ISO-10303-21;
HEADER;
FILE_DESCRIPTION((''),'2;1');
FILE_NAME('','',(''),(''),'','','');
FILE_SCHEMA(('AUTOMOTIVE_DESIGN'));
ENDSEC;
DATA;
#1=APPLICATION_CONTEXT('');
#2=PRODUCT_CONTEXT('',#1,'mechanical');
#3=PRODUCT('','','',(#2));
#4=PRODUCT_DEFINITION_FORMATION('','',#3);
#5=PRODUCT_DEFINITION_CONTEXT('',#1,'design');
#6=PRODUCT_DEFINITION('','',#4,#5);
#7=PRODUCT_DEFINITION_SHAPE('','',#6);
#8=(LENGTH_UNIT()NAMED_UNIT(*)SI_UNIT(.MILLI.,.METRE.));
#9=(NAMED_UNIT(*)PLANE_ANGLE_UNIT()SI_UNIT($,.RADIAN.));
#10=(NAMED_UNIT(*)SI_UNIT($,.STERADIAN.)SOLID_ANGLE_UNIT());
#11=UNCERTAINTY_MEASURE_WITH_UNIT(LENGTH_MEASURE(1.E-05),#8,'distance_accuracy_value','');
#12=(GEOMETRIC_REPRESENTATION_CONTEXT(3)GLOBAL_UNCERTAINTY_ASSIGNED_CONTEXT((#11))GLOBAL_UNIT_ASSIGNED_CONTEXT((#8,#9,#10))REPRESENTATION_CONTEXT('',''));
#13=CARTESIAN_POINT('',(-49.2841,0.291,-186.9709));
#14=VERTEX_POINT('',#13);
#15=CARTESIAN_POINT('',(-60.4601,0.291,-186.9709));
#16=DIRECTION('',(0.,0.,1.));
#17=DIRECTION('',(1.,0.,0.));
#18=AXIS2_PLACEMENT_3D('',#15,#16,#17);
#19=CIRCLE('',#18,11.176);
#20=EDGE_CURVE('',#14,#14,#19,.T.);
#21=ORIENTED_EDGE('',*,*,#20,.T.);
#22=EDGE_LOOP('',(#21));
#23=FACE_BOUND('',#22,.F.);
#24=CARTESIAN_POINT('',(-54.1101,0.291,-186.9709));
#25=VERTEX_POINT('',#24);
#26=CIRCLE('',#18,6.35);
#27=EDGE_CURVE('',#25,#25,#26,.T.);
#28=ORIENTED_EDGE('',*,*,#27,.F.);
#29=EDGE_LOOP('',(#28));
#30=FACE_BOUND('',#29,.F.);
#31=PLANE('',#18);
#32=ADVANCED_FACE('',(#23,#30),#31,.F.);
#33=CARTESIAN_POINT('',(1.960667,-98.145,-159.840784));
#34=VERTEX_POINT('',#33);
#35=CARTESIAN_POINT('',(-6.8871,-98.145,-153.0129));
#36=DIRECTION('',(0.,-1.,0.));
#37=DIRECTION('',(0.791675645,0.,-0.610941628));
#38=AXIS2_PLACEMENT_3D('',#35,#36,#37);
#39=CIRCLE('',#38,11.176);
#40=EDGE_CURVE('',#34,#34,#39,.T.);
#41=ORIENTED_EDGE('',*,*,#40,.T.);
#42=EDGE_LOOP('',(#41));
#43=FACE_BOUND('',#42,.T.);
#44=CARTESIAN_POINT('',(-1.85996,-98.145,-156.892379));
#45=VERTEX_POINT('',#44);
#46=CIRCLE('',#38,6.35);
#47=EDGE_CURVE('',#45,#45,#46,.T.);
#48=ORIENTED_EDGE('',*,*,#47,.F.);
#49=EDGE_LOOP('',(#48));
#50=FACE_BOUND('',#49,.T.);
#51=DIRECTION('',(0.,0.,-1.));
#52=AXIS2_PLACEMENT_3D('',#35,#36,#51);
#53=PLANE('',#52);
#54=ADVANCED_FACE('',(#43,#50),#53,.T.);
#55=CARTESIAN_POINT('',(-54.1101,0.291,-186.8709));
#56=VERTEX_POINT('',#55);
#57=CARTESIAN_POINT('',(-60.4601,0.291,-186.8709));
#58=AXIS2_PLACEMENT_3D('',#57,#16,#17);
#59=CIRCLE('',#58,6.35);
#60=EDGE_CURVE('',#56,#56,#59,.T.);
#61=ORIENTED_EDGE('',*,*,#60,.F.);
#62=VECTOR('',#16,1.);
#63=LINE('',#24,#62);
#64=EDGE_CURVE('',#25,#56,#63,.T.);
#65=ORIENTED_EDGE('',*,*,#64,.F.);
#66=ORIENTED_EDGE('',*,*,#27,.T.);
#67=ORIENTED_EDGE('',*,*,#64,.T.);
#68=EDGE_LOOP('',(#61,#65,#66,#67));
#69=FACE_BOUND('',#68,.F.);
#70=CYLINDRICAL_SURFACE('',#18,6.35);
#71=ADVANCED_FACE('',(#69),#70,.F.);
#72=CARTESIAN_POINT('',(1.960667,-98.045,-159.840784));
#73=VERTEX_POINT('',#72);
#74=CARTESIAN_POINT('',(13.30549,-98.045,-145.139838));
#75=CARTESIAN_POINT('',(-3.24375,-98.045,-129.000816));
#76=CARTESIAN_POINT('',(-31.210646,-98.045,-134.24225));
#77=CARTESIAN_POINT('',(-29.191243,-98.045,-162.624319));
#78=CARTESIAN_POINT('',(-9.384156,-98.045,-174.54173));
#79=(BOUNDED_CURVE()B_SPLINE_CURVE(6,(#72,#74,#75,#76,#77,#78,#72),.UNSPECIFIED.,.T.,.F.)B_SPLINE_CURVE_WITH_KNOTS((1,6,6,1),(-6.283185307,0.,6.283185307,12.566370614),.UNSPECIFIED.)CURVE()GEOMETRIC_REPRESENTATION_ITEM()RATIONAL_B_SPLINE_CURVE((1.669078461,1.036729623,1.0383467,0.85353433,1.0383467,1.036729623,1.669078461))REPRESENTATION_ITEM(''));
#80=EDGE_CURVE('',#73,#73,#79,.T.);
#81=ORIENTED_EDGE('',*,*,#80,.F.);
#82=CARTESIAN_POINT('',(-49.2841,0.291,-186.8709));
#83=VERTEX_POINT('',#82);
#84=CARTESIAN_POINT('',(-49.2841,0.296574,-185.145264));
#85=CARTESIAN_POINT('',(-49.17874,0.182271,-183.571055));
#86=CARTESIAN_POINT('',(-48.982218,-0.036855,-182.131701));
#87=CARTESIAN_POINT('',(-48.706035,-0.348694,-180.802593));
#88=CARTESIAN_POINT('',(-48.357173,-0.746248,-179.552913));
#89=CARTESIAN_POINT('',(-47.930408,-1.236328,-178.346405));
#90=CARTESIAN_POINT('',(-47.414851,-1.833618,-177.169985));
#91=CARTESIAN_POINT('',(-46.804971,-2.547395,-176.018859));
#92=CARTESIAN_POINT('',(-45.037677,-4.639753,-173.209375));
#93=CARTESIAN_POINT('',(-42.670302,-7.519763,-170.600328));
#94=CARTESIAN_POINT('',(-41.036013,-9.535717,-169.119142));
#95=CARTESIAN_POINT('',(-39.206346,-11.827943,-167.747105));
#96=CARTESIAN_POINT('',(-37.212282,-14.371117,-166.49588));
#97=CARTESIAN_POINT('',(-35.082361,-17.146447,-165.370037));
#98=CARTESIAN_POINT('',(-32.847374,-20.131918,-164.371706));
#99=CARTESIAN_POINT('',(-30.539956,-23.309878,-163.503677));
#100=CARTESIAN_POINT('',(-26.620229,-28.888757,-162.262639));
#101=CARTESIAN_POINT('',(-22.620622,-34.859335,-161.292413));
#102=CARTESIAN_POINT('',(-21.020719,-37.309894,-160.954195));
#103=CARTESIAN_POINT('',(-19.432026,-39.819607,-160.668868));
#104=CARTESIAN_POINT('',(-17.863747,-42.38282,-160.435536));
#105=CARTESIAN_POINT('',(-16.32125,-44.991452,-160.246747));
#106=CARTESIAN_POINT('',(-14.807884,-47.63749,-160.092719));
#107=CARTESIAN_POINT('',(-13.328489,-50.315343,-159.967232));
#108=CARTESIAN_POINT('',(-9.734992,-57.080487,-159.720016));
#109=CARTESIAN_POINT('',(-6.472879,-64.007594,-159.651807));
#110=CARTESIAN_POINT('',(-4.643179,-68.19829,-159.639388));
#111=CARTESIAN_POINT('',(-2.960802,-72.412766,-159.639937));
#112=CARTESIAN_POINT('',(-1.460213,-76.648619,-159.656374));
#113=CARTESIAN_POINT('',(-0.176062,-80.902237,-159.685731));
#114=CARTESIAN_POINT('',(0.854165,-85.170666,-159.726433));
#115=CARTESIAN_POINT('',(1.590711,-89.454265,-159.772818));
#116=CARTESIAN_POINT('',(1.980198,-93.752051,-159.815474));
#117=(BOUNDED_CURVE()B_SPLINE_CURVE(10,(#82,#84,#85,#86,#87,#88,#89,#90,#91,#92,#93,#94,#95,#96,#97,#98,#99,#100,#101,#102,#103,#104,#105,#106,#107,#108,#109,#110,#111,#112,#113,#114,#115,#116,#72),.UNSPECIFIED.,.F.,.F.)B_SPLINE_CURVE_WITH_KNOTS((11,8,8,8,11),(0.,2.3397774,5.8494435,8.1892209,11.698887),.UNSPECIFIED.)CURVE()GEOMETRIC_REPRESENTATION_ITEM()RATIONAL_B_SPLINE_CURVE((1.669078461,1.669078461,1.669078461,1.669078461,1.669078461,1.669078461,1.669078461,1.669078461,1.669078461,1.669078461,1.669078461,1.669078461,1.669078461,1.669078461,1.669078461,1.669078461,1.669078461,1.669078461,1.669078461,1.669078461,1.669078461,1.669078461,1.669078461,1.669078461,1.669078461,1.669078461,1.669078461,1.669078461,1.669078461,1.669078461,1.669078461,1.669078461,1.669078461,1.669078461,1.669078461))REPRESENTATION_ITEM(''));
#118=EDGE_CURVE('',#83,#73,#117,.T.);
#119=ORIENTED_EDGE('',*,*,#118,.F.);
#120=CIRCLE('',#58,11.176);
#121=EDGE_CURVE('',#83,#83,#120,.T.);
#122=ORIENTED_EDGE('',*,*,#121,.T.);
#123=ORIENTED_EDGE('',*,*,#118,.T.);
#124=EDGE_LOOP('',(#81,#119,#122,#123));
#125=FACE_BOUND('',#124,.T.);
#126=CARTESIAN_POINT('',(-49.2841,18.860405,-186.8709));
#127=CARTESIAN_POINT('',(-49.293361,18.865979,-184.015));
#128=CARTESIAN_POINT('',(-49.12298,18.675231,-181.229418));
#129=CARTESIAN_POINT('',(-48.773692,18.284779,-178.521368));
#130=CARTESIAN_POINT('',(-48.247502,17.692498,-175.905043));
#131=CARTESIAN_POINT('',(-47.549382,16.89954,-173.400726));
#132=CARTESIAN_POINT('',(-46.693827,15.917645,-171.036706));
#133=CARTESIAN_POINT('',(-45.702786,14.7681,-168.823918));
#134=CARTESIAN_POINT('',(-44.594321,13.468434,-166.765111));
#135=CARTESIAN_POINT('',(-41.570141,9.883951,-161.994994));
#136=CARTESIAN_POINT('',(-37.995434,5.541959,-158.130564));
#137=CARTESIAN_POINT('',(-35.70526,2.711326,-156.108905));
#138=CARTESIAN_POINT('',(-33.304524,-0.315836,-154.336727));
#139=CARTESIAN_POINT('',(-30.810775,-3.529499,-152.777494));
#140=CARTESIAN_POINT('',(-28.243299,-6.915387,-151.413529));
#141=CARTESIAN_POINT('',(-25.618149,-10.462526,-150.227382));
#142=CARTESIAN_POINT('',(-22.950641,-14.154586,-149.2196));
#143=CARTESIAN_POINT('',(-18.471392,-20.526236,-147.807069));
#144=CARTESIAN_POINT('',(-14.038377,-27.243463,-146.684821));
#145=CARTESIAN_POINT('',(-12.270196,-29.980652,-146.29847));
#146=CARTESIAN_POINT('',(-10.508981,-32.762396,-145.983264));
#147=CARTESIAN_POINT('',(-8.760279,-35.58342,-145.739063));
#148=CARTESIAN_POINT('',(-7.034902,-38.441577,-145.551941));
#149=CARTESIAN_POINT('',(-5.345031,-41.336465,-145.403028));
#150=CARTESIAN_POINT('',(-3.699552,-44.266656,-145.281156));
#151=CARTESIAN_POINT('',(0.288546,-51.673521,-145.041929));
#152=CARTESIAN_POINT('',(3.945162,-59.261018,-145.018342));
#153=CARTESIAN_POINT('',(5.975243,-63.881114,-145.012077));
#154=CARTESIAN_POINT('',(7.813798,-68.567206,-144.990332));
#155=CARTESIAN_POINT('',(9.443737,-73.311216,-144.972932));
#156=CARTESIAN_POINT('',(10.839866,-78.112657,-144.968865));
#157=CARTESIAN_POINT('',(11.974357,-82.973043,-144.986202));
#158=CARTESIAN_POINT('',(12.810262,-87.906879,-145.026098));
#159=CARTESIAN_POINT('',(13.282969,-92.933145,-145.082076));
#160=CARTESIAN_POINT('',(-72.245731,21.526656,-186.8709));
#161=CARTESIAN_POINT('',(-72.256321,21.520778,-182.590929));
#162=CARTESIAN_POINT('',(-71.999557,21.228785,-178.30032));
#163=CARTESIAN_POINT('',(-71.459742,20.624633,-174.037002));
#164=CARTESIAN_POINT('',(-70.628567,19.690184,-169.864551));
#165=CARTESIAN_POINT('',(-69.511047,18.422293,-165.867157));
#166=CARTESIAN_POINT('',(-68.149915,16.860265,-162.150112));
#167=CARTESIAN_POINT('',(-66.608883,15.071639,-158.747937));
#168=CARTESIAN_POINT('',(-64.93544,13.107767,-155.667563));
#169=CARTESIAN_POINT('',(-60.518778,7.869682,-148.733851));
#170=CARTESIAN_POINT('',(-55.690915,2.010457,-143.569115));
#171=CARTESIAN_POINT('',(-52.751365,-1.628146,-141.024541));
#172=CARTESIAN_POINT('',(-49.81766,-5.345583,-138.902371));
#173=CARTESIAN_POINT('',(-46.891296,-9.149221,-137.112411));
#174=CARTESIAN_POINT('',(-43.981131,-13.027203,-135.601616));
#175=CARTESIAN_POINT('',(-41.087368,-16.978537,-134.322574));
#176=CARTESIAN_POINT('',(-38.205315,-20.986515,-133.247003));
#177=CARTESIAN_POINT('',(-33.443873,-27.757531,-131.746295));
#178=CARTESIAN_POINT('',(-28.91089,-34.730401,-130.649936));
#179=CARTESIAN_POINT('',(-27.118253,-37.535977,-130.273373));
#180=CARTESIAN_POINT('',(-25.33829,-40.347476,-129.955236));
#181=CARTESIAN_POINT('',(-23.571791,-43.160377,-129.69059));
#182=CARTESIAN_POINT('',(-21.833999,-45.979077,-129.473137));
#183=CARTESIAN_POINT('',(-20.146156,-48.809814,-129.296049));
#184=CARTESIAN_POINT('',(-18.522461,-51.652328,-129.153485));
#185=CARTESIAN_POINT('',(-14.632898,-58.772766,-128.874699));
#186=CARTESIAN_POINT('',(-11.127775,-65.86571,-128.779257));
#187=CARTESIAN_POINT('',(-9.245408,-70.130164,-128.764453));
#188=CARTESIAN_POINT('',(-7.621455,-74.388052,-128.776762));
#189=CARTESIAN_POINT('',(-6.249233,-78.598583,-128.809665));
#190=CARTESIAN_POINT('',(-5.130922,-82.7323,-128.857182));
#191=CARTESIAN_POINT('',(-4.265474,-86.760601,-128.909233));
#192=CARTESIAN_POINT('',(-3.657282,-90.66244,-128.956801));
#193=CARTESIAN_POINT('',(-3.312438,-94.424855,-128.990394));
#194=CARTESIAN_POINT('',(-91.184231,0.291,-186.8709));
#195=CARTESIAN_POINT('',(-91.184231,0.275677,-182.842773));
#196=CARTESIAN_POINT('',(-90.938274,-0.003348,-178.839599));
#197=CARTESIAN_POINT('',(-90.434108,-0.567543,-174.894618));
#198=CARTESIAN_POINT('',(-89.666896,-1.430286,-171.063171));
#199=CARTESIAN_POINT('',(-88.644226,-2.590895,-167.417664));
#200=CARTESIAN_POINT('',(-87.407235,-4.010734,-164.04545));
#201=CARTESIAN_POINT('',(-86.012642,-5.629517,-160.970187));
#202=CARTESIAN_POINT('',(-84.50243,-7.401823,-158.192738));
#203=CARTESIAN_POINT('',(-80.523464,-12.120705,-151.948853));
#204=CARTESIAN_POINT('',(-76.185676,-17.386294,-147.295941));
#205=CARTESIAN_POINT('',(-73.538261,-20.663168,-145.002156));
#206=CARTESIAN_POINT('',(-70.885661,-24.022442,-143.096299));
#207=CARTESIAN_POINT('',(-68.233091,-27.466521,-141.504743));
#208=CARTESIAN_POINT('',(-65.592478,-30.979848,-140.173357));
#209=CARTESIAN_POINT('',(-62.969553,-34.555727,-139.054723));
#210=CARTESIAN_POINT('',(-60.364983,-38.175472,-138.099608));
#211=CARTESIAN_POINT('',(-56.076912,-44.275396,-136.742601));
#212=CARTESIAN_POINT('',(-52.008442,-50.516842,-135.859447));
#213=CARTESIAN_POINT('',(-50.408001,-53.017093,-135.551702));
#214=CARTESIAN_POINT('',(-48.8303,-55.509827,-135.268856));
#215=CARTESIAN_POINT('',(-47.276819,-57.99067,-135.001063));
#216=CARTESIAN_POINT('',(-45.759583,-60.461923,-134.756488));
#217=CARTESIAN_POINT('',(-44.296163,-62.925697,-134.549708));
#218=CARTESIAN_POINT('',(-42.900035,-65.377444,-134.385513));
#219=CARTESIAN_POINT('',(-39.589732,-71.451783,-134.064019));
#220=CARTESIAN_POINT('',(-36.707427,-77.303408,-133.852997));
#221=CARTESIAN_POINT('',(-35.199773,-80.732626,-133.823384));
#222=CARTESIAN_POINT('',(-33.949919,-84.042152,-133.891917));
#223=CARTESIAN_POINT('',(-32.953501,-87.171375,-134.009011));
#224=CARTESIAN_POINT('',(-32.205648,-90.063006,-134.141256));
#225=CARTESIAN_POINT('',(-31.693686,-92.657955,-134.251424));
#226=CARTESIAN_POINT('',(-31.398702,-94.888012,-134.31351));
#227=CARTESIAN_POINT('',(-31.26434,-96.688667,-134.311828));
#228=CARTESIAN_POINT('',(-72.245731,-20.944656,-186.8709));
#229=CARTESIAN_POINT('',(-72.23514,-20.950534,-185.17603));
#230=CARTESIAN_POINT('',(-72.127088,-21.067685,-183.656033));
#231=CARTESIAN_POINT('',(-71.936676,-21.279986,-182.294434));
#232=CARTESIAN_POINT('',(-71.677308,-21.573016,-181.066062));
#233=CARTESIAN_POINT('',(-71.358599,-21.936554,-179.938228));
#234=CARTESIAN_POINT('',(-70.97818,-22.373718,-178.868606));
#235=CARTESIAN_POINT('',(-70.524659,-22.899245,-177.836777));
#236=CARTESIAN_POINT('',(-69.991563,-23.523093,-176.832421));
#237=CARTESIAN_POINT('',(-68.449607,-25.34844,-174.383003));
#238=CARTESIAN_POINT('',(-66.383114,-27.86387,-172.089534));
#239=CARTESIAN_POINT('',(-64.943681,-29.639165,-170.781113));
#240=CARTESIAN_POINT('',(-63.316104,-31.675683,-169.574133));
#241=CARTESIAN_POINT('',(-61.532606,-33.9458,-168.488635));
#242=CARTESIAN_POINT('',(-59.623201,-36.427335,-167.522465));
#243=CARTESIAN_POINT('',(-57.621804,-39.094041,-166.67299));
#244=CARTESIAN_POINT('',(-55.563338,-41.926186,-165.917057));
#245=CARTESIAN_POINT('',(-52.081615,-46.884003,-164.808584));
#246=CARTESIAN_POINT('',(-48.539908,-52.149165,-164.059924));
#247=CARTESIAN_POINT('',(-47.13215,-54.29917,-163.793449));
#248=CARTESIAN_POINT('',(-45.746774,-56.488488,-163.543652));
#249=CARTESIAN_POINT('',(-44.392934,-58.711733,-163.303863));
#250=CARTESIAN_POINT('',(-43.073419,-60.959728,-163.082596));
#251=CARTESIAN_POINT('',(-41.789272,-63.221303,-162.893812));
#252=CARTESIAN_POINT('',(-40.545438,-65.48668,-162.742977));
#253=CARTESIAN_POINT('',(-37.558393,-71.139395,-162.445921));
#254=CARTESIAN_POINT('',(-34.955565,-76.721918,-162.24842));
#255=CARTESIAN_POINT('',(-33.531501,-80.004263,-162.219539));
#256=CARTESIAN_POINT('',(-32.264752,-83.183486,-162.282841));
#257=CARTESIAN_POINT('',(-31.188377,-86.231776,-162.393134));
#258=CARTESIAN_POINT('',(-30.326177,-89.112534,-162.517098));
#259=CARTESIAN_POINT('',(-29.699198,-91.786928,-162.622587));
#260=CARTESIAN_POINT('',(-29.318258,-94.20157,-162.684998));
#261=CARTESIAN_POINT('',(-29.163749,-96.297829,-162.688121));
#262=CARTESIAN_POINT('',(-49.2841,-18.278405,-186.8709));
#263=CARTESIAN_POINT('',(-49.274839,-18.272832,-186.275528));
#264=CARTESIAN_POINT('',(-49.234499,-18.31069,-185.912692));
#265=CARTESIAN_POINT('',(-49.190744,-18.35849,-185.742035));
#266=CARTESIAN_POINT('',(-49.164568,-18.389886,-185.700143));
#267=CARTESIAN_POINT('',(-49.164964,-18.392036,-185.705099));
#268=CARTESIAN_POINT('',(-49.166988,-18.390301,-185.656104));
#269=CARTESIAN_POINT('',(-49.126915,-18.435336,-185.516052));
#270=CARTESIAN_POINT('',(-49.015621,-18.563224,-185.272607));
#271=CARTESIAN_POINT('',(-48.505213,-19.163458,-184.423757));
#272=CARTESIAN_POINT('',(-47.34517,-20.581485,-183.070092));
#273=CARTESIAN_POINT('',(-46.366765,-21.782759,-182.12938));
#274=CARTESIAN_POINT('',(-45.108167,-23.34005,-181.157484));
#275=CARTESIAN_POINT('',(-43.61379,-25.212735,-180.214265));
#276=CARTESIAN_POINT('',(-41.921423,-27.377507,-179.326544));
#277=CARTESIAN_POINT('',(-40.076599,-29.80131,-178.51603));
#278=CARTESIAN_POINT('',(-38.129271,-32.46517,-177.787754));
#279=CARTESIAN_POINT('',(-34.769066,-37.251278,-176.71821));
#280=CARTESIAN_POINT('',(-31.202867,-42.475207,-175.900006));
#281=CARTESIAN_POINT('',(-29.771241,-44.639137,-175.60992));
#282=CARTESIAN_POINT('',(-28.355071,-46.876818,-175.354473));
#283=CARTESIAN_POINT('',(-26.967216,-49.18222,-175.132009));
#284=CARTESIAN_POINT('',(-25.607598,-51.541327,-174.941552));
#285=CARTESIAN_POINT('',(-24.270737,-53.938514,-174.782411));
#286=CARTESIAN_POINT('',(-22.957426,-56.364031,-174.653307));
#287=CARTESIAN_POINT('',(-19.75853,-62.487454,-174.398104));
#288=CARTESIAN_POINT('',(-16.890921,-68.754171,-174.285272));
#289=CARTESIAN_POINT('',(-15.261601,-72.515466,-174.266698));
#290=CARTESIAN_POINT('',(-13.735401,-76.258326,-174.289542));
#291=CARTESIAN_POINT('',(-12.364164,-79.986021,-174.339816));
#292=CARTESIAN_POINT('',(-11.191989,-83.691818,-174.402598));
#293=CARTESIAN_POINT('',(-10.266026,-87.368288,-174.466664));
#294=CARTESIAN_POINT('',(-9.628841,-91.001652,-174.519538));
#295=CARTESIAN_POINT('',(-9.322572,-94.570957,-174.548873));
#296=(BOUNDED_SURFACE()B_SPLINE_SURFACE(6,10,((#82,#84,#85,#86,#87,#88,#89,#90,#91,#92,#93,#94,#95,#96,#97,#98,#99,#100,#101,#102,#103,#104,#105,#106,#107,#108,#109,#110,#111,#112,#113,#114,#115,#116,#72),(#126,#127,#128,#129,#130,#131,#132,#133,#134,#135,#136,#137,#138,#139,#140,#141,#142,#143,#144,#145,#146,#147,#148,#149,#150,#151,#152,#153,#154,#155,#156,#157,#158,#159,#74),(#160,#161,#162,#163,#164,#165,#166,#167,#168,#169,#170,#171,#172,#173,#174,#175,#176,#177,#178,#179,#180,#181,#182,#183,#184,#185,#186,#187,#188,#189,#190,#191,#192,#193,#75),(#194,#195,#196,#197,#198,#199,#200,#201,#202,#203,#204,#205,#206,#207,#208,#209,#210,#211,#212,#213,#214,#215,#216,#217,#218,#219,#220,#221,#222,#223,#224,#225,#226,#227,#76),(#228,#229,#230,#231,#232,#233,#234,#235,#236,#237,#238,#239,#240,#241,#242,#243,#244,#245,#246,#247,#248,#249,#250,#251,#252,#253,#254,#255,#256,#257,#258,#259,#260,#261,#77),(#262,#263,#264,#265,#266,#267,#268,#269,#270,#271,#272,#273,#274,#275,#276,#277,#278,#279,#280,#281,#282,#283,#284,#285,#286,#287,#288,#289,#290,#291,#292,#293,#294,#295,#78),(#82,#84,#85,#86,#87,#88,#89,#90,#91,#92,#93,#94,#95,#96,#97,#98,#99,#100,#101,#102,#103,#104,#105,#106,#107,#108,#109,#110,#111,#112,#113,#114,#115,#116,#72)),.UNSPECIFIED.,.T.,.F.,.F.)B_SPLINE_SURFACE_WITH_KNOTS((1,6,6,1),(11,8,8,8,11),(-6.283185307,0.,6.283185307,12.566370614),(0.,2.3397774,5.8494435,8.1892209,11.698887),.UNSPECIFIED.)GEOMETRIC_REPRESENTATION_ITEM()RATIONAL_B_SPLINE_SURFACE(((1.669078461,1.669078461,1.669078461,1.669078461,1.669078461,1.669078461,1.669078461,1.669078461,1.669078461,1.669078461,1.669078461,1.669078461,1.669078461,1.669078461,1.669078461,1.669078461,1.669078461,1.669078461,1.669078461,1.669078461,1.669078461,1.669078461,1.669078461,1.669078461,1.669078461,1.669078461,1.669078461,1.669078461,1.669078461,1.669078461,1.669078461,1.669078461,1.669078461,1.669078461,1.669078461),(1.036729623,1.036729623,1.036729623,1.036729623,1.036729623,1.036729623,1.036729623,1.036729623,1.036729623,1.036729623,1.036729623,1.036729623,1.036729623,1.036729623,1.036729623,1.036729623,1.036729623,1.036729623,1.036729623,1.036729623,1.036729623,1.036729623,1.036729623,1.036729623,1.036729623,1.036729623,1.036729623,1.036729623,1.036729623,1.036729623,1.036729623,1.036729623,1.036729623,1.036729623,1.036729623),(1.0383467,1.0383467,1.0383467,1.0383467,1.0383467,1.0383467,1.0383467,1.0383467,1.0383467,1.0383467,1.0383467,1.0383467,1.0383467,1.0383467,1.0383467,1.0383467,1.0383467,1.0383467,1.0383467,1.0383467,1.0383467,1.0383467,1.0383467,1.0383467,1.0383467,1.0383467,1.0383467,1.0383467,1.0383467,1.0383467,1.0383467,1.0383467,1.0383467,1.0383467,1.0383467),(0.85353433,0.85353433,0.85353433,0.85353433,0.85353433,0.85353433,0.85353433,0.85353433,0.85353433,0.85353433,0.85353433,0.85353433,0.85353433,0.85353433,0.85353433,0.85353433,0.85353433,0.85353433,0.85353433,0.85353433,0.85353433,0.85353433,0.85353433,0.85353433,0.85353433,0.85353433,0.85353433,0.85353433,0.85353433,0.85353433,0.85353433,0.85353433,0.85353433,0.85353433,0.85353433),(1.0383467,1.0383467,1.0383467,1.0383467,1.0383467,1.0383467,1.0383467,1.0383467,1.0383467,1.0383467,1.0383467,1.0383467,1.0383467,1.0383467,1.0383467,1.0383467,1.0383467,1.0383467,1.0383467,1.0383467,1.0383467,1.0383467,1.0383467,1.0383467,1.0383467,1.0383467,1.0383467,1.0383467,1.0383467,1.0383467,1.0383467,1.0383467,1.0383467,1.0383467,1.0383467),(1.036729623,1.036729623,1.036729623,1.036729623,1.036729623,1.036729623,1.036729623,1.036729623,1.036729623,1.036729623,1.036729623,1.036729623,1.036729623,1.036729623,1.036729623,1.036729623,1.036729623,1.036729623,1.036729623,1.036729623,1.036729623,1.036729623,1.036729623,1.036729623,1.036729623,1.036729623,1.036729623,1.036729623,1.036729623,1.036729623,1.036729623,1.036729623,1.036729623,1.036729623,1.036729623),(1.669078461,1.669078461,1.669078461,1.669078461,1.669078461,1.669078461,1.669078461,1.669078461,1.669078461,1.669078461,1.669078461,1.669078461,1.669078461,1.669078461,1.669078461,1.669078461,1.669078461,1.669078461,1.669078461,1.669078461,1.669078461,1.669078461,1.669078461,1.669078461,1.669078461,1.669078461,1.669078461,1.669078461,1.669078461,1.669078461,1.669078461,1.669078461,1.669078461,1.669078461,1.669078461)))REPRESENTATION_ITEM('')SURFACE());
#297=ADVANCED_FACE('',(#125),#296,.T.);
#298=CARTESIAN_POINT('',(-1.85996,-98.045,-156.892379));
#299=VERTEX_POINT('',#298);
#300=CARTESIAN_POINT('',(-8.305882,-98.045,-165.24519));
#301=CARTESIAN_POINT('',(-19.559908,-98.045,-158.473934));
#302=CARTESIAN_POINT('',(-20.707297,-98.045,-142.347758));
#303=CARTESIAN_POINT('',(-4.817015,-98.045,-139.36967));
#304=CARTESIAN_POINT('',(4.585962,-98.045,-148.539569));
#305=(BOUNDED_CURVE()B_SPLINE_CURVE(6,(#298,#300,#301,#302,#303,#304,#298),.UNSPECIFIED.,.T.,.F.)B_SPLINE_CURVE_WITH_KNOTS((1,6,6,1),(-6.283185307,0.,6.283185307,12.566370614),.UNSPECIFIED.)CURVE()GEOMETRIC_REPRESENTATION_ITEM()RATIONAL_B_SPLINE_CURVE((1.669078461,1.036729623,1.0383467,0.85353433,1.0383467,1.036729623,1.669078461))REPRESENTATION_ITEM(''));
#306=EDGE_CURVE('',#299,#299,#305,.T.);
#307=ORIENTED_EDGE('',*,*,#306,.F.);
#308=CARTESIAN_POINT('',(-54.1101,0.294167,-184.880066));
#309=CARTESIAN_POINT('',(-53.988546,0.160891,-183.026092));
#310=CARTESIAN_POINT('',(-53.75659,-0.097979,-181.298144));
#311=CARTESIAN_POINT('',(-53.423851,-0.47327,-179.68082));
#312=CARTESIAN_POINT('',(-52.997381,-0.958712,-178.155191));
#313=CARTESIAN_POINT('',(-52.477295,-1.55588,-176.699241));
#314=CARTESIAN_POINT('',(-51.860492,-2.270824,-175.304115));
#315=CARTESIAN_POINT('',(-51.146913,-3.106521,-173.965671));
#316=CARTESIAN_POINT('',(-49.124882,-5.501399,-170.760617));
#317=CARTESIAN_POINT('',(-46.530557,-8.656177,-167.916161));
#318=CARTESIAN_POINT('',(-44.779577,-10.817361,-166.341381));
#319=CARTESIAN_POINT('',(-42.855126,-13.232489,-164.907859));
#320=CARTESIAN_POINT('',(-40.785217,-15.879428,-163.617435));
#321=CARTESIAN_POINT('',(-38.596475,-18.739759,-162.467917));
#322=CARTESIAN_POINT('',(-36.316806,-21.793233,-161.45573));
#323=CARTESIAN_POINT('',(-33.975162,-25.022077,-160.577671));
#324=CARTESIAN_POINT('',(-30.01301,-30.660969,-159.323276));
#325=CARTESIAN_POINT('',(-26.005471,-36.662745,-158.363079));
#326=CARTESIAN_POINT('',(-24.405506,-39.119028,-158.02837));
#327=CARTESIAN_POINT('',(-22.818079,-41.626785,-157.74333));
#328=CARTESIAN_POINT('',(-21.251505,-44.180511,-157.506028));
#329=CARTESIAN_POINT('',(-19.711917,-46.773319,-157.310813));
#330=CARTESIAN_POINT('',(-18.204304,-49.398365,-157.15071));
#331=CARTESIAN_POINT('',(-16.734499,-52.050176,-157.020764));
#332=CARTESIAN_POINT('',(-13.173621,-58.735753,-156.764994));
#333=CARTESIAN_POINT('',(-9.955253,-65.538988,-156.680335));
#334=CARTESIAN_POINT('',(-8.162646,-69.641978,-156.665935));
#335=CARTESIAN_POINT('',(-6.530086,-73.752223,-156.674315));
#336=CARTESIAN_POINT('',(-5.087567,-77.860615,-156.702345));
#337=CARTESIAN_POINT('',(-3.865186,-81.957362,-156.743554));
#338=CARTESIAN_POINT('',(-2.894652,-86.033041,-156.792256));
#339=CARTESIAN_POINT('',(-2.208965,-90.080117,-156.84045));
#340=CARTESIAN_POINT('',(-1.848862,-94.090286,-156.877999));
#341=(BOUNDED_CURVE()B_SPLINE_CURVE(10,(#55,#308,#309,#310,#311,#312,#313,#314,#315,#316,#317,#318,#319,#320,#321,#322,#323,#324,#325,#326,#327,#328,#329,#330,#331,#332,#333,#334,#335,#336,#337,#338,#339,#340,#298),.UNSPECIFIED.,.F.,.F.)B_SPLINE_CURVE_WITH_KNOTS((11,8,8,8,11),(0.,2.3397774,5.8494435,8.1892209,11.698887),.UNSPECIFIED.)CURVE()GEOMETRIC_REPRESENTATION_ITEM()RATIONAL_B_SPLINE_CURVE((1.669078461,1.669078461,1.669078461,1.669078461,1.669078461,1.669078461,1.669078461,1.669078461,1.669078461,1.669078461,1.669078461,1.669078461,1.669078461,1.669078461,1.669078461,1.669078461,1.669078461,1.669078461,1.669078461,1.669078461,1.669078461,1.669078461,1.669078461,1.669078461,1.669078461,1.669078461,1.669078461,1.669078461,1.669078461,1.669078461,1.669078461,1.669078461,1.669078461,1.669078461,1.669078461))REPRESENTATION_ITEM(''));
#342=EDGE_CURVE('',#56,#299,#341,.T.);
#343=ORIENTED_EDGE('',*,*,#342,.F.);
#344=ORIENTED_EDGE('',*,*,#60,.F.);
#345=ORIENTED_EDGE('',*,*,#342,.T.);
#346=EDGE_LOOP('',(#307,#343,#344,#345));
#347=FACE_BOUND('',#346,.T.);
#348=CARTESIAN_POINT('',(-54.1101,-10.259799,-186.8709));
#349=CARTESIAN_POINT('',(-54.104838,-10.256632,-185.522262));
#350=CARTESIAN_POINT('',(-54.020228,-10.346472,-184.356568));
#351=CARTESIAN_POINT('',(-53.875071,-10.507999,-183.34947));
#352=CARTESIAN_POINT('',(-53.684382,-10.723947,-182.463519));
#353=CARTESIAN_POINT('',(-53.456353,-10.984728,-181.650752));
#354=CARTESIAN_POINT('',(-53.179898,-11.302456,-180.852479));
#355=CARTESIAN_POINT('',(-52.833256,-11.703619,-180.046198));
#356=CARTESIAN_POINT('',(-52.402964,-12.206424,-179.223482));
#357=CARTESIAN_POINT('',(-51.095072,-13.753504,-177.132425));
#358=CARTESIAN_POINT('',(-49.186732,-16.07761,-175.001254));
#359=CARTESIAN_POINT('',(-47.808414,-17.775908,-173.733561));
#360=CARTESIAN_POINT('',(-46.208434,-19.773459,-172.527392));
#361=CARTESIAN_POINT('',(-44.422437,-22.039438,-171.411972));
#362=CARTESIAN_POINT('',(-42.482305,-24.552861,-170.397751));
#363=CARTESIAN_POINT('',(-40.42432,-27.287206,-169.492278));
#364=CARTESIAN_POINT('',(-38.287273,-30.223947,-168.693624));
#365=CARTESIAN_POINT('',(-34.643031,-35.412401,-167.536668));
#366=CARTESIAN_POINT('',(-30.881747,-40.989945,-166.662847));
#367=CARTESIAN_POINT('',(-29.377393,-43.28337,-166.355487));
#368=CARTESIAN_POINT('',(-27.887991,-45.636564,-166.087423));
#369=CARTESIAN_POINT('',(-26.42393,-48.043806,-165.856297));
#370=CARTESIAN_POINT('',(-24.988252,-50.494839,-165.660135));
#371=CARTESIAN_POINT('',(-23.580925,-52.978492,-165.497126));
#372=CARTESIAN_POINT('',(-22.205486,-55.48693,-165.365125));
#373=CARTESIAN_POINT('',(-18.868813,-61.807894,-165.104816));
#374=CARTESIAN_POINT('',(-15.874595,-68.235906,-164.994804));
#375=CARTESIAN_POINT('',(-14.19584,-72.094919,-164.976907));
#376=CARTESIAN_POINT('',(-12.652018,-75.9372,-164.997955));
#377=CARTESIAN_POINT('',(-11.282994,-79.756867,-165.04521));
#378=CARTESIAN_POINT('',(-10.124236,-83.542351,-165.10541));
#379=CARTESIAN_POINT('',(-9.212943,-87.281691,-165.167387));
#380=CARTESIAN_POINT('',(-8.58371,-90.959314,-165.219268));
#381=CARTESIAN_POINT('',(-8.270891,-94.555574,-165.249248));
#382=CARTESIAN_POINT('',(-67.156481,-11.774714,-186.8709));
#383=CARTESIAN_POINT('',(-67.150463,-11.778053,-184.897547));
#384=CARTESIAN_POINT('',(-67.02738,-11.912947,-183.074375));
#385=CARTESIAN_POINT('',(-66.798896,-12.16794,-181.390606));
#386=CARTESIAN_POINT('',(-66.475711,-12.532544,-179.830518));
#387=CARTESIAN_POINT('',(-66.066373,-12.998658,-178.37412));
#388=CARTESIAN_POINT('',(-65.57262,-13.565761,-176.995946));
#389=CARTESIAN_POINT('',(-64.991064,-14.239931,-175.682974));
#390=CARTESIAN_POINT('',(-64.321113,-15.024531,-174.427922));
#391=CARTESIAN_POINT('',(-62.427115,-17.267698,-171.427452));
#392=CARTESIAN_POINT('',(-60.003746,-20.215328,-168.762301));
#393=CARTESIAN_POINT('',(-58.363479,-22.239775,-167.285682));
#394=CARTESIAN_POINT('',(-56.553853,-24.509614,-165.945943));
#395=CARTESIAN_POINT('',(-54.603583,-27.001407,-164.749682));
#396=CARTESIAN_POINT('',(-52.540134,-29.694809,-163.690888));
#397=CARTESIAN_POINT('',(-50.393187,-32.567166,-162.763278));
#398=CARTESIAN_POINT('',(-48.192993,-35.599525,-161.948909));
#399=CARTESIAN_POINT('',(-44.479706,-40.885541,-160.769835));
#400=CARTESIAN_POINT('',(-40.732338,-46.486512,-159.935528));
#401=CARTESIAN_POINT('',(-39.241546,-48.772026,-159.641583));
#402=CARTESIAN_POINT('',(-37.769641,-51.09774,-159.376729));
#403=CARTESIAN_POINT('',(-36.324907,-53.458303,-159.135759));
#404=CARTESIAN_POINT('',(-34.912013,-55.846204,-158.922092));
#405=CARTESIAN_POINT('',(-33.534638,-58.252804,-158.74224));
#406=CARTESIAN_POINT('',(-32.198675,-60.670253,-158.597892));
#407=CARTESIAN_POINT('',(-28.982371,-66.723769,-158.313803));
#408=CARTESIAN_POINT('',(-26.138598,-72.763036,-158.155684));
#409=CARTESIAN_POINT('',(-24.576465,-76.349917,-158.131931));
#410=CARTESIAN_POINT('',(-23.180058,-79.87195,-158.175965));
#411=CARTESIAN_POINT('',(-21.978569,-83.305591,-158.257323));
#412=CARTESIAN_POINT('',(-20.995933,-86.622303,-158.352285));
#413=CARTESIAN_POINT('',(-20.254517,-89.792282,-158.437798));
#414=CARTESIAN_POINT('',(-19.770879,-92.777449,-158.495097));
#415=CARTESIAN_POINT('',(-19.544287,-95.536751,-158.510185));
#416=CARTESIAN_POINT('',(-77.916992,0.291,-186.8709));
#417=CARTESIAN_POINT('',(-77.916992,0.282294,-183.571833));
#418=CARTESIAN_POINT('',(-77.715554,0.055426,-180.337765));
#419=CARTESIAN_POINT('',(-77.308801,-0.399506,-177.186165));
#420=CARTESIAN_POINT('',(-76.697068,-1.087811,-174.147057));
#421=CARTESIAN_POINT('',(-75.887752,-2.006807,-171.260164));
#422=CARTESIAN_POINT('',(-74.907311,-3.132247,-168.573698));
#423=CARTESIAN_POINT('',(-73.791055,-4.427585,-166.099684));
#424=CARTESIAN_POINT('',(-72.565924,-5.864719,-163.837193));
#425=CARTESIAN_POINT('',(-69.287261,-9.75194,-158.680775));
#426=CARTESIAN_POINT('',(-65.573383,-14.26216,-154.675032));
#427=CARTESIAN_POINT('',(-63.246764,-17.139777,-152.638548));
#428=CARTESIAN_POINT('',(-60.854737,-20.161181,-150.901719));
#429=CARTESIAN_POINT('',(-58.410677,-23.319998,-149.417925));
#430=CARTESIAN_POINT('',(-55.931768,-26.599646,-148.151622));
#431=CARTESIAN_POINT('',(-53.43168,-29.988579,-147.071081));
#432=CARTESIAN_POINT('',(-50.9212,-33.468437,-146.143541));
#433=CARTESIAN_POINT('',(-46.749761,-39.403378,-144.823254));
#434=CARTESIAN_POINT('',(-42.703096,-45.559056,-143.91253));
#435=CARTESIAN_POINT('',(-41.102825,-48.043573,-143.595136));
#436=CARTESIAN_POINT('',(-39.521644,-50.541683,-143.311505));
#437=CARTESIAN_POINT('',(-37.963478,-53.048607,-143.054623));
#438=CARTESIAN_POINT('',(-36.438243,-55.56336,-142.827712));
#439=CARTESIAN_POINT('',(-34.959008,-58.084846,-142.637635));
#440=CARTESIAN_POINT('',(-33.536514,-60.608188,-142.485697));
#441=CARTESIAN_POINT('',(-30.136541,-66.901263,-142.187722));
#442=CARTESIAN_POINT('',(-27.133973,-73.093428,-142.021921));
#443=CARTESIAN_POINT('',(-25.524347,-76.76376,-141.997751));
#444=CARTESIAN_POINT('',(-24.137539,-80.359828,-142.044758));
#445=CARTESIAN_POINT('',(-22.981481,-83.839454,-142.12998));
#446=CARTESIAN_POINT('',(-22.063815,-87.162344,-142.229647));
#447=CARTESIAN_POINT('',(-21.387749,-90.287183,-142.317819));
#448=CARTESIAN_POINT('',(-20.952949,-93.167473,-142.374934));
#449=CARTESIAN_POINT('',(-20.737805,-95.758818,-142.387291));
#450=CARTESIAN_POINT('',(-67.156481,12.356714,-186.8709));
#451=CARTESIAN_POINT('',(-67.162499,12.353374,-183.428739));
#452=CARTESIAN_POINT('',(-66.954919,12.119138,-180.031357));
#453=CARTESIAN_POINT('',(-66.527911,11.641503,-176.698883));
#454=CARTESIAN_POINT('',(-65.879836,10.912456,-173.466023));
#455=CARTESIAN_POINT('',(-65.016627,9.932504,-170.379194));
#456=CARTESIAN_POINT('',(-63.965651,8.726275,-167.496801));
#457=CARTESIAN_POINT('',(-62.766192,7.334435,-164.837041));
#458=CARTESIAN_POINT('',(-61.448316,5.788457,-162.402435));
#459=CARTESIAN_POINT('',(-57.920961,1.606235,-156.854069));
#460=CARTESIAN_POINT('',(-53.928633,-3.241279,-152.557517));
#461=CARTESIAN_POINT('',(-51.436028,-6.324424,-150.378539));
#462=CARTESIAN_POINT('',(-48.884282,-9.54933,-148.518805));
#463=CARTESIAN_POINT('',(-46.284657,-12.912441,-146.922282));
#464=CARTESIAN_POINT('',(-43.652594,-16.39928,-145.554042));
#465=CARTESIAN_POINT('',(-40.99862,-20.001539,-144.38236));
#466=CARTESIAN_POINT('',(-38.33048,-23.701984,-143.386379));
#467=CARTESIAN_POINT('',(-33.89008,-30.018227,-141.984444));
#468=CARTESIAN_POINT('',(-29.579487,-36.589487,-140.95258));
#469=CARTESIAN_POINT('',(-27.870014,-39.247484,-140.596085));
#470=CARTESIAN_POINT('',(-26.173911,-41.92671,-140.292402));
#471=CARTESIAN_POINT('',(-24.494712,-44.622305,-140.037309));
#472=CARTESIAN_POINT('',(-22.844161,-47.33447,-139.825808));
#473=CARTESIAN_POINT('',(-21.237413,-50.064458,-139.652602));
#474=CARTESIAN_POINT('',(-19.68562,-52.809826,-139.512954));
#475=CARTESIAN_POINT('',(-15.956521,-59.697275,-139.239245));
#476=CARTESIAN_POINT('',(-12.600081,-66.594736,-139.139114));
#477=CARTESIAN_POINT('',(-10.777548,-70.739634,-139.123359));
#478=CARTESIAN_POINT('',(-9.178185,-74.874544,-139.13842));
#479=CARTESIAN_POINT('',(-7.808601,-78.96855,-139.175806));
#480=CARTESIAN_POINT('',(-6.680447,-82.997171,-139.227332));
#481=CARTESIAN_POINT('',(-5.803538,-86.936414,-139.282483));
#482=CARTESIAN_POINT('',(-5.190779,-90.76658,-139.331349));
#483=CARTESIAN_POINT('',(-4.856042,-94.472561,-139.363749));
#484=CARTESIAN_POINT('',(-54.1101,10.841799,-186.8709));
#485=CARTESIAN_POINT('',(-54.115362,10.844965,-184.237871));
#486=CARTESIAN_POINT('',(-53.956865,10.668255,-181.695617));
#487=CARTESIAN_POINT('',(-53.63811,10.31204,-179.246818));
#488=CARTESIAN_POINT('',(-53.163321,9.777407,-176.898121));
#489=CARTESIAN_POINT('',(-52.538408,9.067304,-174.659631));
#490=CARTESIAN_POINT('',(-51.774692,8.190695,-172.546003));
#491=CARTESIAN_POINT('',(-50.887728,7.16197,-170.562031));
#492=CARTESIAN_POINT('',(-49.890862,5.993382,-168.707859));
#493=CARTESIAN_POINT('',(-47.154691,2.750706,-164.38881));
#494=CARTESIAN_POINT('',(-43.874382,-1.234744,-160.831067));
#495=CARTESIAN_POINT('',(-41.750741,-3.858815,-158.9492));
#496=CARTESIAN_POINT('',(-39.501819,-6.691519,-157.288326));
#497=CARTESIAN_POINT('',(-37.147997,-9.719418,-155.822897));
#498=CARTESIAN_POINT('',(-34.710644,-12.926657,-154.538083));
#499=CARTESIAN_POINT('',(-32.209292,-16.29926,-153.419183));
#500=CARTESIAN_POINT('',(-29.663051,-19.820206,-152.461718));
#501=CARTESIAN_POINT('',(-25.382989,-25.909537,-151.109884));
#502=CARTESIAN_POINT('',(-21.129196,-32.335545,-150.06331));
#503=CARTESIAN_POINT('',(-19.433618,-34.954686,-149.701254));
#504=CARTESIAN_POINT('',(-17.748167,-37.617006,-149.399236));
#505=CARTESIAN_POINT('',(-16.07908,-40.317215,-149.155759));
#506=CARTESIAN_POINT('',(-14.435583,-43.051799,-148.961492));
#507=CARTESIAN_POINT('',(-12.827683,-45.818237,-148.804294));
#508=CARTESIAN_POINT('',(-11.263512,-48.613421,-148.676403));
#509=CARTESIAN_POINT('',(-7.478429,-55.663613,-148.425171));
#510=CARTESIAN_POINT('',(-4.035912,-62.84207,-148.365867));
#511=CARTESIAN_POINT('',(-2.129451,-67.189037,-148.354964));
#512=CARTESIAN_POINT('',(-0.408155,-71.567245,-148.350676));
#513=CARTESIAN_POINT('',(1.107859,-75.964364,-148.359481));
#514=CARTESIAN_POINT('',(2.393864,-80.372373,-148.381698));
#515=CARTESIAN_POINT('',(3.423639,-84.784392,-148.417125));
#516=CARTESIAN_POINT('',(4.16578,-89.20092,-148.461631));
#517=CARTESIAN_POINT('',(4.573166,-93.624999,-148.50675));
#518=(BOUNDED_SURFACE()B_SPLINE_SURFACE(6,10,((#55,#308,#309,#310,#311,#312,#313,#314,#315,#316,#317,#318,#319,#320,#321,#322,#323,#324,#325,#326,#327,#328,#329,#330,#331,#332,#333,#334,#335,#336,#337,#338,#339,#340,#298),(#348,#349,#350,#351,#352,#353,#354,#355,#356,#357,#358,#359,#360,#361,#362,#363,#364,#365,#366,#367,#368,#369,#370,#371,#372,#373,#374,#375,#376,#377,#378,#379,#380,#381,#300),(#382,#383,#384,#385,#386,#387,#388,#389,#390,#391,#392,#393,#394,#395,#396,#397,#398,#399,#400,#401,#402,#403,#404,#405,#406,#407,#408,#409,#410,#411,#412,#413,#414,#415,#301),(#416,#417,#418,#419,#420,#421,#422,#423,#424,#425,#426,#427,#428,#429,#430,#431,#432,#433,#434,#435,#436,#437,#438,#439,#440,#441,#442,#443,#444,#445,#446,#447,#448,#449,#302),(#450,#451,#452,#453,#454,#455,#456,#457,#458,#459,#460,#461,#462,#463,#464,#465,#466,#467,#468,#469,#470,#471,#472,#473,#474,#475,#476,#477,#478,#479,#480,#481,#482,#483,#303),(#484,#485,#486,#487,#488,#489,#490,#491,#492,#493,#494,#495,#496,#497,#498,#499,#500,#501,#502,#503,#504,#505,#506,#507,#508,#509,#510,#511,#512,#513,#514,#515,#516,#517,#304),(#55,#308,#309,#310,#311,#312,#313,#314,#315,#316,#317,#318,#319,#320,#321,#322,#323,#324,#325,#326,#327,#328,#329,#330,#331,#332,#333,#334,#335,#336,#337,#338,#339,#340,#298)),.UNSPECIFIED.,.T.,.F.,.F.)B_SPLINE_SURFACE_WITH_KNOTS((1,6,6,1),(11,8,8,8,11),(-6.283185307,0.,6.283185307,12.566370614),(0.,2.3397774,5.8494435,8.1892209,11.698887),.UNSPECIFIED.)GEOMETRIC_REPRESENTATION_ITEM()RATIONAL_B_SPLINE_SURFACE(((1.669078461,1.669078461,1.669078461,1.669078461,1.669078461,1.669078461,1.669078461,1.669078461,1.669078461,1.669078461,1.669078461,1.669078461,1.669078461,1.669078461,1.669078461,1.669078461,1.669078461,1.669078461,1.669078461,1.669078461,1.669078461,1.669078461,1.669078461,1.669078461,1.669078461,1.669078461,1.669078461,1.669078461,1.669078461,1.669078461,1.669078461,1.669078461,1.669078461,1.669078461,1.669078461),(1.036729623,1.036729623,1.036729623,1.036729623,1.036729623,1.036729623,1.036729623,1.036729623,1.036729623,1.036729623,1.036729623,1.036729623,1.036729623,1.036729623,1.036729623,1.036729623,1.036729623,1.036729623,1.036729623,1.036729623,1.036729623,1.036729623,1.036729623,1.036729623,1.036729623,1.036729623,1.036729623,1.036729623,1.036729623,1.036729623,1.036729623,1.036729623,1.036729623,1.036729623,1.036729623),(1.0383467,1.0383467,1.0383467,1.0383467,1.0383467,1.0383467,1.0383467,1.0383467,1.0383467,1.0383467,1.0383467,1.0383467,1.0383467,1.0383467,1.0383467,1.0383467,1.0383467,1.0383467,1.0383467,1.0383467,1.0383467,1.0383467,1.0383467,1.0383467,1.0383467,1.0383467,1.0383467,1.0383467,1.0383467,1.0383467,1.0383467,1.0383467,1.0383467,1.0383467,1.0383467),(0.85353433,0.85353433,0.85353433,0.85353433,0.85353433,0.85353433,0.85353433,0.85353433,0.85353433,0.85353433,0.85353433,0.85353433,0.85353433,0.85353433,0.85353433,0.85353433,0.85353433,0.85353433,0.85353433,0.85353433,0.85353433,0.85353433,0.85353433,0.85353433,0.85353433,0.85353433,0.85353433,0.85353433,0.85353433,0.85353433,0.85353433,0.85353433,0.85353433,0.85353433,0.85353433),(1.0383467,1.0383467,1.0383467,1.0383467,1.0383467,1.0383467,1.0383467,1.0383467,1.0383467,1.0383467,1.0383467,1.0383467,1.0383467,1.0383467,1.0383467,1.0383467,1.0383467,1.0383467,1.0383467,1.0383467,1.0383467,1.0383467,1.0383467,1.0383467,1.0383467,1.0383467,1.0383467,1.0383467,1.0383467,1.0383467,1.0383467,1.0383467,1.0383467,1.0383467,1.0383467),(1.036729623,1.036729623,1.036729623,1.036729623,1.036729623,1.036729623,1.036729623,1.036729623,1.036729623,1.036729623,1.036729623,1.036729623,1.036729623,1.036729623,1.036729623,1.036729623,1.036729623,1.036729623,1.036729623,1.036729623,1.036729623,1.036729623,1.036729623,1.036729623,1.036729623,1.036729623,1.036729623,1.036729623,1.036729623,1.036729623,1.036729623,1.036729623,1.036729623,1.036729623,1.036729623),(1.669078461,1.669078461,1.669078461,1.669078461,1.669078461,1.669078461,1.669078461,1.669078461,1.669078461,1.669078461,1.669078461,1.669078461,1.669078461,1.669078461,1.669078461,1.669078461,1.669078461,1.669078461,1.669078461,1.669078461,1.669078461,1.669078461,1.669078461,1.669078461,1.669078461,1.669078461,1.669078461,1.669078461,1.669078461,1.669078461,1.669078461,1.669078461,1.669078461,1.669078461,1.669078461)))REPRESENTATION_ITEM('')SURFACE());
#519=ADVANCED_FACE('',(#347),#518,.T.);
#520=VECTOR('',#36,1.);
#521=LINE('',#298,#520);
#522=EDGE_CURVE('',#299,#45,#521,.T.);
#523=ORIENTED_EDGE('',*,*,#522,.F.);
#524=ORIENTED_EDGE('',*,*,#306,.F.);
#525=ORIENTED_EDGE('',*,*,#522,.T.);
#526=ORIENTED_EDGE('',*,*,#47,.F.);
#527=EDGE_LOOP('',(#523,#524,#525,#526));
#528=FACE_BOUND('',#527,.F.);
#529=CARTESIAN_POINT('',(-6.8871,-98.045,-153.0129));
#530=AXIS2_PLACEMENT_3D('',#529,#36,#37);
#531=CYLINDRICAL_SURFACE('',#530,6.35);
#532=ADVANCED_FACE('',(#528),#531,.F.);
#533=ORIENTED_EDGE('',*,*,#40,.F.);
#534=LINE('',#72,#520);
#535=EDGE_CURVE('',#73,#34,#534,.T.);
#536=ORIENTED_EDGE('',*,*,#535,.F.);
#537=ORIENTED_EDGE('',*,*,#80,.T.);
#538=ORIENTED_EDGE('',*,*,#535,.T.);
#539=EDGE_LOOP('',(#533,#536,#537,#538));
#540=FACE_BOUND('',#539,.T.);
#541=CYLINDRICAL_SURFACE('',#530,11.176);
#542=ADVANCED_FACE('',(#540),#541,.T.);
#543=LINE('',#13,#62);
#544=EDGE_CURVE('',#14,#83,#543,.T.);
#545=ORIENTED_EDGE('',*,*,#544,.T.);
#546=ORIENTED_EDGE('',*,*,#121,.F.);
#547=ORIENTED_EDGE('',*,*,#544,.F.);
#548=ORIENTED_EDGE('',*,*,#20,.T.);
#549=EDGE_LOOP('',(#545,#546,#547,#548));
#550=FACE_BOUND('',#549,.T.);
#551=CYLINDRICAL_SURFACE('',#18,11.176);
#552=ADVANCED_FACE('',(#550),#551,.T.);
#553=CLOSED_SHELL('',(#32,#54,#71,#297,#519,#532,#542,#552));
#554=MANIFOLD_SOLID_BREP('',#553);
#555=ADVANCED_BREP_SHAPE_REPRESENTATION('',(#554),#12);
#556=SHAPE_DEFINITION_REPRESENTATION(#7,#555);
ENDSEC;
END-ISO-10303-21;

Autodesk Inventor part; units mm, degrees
ref_plane "YZ Plane" through (0, 0, 0) normal (1, 0, 0) x (0, 1, 0)
ref_plane "XZ Plane" through (0, 0, 0) normal (0, 1, 0) x (-1, 0, 0)
ref_plane "XY Plane" through (0, 0, 0) normal (0, 0, 1) x (1, 0, 0)
ref_plane "Work Plane1" through (-60.4601, 0.291, -186.8709) normal (0, 0, 1) x (1, 0, 0)
sketch "Sketch2" plane through (-60.4601, 0.291, -186.8709) normal (0, 0, 1) x (1, 0, 0)
  circle A0 centre (0, 0) radius 11.176
  circle A1 centre (0, 0) radius 6.35
  dimension "d6" = 22.352
  dimension "d7" = 12.7
sketch3d "3D Sketch1"
  line L0 (-60.4601, 0.291, -186.9709) -> (-60.4601, 0.291, -186.8709)
  spline S0 degree 3 poles (-60.4601, 0.291, -186.8709) (-60.4601, 0.291, -147.8746) (-6.8871, -59.0487, -153.0129) (-6.8871, -98.045, -153.0129) knots 0 0 0 0 11.698887 11.698887 11.698887 11.698887
  line L1 (-6.8871, -98.045, -153.0129) -> (-6.8871, -98.145, -153.0129)
  dimension "d4" = 1
  dimension "d5" = 1
sweep "Sweep1" add profiles "Sketch2" path "3D Sketch1"
equation "\"d6\" = OD"
equation "\"d7\" = ID"
equation "\"ID\" = 12.7"
equation "\"OD\" = 22.352"
equation "\"L\" = PL"
equation "\"PL\" = 129.2606"
equation "\"Size_Designation\" = 0.5"
equation "\"RPL\" = 130.175"
equation "\"OPL\" = 129.2606"
equation "\"ROPL\" = 130.175"
properties material "Rubber"
